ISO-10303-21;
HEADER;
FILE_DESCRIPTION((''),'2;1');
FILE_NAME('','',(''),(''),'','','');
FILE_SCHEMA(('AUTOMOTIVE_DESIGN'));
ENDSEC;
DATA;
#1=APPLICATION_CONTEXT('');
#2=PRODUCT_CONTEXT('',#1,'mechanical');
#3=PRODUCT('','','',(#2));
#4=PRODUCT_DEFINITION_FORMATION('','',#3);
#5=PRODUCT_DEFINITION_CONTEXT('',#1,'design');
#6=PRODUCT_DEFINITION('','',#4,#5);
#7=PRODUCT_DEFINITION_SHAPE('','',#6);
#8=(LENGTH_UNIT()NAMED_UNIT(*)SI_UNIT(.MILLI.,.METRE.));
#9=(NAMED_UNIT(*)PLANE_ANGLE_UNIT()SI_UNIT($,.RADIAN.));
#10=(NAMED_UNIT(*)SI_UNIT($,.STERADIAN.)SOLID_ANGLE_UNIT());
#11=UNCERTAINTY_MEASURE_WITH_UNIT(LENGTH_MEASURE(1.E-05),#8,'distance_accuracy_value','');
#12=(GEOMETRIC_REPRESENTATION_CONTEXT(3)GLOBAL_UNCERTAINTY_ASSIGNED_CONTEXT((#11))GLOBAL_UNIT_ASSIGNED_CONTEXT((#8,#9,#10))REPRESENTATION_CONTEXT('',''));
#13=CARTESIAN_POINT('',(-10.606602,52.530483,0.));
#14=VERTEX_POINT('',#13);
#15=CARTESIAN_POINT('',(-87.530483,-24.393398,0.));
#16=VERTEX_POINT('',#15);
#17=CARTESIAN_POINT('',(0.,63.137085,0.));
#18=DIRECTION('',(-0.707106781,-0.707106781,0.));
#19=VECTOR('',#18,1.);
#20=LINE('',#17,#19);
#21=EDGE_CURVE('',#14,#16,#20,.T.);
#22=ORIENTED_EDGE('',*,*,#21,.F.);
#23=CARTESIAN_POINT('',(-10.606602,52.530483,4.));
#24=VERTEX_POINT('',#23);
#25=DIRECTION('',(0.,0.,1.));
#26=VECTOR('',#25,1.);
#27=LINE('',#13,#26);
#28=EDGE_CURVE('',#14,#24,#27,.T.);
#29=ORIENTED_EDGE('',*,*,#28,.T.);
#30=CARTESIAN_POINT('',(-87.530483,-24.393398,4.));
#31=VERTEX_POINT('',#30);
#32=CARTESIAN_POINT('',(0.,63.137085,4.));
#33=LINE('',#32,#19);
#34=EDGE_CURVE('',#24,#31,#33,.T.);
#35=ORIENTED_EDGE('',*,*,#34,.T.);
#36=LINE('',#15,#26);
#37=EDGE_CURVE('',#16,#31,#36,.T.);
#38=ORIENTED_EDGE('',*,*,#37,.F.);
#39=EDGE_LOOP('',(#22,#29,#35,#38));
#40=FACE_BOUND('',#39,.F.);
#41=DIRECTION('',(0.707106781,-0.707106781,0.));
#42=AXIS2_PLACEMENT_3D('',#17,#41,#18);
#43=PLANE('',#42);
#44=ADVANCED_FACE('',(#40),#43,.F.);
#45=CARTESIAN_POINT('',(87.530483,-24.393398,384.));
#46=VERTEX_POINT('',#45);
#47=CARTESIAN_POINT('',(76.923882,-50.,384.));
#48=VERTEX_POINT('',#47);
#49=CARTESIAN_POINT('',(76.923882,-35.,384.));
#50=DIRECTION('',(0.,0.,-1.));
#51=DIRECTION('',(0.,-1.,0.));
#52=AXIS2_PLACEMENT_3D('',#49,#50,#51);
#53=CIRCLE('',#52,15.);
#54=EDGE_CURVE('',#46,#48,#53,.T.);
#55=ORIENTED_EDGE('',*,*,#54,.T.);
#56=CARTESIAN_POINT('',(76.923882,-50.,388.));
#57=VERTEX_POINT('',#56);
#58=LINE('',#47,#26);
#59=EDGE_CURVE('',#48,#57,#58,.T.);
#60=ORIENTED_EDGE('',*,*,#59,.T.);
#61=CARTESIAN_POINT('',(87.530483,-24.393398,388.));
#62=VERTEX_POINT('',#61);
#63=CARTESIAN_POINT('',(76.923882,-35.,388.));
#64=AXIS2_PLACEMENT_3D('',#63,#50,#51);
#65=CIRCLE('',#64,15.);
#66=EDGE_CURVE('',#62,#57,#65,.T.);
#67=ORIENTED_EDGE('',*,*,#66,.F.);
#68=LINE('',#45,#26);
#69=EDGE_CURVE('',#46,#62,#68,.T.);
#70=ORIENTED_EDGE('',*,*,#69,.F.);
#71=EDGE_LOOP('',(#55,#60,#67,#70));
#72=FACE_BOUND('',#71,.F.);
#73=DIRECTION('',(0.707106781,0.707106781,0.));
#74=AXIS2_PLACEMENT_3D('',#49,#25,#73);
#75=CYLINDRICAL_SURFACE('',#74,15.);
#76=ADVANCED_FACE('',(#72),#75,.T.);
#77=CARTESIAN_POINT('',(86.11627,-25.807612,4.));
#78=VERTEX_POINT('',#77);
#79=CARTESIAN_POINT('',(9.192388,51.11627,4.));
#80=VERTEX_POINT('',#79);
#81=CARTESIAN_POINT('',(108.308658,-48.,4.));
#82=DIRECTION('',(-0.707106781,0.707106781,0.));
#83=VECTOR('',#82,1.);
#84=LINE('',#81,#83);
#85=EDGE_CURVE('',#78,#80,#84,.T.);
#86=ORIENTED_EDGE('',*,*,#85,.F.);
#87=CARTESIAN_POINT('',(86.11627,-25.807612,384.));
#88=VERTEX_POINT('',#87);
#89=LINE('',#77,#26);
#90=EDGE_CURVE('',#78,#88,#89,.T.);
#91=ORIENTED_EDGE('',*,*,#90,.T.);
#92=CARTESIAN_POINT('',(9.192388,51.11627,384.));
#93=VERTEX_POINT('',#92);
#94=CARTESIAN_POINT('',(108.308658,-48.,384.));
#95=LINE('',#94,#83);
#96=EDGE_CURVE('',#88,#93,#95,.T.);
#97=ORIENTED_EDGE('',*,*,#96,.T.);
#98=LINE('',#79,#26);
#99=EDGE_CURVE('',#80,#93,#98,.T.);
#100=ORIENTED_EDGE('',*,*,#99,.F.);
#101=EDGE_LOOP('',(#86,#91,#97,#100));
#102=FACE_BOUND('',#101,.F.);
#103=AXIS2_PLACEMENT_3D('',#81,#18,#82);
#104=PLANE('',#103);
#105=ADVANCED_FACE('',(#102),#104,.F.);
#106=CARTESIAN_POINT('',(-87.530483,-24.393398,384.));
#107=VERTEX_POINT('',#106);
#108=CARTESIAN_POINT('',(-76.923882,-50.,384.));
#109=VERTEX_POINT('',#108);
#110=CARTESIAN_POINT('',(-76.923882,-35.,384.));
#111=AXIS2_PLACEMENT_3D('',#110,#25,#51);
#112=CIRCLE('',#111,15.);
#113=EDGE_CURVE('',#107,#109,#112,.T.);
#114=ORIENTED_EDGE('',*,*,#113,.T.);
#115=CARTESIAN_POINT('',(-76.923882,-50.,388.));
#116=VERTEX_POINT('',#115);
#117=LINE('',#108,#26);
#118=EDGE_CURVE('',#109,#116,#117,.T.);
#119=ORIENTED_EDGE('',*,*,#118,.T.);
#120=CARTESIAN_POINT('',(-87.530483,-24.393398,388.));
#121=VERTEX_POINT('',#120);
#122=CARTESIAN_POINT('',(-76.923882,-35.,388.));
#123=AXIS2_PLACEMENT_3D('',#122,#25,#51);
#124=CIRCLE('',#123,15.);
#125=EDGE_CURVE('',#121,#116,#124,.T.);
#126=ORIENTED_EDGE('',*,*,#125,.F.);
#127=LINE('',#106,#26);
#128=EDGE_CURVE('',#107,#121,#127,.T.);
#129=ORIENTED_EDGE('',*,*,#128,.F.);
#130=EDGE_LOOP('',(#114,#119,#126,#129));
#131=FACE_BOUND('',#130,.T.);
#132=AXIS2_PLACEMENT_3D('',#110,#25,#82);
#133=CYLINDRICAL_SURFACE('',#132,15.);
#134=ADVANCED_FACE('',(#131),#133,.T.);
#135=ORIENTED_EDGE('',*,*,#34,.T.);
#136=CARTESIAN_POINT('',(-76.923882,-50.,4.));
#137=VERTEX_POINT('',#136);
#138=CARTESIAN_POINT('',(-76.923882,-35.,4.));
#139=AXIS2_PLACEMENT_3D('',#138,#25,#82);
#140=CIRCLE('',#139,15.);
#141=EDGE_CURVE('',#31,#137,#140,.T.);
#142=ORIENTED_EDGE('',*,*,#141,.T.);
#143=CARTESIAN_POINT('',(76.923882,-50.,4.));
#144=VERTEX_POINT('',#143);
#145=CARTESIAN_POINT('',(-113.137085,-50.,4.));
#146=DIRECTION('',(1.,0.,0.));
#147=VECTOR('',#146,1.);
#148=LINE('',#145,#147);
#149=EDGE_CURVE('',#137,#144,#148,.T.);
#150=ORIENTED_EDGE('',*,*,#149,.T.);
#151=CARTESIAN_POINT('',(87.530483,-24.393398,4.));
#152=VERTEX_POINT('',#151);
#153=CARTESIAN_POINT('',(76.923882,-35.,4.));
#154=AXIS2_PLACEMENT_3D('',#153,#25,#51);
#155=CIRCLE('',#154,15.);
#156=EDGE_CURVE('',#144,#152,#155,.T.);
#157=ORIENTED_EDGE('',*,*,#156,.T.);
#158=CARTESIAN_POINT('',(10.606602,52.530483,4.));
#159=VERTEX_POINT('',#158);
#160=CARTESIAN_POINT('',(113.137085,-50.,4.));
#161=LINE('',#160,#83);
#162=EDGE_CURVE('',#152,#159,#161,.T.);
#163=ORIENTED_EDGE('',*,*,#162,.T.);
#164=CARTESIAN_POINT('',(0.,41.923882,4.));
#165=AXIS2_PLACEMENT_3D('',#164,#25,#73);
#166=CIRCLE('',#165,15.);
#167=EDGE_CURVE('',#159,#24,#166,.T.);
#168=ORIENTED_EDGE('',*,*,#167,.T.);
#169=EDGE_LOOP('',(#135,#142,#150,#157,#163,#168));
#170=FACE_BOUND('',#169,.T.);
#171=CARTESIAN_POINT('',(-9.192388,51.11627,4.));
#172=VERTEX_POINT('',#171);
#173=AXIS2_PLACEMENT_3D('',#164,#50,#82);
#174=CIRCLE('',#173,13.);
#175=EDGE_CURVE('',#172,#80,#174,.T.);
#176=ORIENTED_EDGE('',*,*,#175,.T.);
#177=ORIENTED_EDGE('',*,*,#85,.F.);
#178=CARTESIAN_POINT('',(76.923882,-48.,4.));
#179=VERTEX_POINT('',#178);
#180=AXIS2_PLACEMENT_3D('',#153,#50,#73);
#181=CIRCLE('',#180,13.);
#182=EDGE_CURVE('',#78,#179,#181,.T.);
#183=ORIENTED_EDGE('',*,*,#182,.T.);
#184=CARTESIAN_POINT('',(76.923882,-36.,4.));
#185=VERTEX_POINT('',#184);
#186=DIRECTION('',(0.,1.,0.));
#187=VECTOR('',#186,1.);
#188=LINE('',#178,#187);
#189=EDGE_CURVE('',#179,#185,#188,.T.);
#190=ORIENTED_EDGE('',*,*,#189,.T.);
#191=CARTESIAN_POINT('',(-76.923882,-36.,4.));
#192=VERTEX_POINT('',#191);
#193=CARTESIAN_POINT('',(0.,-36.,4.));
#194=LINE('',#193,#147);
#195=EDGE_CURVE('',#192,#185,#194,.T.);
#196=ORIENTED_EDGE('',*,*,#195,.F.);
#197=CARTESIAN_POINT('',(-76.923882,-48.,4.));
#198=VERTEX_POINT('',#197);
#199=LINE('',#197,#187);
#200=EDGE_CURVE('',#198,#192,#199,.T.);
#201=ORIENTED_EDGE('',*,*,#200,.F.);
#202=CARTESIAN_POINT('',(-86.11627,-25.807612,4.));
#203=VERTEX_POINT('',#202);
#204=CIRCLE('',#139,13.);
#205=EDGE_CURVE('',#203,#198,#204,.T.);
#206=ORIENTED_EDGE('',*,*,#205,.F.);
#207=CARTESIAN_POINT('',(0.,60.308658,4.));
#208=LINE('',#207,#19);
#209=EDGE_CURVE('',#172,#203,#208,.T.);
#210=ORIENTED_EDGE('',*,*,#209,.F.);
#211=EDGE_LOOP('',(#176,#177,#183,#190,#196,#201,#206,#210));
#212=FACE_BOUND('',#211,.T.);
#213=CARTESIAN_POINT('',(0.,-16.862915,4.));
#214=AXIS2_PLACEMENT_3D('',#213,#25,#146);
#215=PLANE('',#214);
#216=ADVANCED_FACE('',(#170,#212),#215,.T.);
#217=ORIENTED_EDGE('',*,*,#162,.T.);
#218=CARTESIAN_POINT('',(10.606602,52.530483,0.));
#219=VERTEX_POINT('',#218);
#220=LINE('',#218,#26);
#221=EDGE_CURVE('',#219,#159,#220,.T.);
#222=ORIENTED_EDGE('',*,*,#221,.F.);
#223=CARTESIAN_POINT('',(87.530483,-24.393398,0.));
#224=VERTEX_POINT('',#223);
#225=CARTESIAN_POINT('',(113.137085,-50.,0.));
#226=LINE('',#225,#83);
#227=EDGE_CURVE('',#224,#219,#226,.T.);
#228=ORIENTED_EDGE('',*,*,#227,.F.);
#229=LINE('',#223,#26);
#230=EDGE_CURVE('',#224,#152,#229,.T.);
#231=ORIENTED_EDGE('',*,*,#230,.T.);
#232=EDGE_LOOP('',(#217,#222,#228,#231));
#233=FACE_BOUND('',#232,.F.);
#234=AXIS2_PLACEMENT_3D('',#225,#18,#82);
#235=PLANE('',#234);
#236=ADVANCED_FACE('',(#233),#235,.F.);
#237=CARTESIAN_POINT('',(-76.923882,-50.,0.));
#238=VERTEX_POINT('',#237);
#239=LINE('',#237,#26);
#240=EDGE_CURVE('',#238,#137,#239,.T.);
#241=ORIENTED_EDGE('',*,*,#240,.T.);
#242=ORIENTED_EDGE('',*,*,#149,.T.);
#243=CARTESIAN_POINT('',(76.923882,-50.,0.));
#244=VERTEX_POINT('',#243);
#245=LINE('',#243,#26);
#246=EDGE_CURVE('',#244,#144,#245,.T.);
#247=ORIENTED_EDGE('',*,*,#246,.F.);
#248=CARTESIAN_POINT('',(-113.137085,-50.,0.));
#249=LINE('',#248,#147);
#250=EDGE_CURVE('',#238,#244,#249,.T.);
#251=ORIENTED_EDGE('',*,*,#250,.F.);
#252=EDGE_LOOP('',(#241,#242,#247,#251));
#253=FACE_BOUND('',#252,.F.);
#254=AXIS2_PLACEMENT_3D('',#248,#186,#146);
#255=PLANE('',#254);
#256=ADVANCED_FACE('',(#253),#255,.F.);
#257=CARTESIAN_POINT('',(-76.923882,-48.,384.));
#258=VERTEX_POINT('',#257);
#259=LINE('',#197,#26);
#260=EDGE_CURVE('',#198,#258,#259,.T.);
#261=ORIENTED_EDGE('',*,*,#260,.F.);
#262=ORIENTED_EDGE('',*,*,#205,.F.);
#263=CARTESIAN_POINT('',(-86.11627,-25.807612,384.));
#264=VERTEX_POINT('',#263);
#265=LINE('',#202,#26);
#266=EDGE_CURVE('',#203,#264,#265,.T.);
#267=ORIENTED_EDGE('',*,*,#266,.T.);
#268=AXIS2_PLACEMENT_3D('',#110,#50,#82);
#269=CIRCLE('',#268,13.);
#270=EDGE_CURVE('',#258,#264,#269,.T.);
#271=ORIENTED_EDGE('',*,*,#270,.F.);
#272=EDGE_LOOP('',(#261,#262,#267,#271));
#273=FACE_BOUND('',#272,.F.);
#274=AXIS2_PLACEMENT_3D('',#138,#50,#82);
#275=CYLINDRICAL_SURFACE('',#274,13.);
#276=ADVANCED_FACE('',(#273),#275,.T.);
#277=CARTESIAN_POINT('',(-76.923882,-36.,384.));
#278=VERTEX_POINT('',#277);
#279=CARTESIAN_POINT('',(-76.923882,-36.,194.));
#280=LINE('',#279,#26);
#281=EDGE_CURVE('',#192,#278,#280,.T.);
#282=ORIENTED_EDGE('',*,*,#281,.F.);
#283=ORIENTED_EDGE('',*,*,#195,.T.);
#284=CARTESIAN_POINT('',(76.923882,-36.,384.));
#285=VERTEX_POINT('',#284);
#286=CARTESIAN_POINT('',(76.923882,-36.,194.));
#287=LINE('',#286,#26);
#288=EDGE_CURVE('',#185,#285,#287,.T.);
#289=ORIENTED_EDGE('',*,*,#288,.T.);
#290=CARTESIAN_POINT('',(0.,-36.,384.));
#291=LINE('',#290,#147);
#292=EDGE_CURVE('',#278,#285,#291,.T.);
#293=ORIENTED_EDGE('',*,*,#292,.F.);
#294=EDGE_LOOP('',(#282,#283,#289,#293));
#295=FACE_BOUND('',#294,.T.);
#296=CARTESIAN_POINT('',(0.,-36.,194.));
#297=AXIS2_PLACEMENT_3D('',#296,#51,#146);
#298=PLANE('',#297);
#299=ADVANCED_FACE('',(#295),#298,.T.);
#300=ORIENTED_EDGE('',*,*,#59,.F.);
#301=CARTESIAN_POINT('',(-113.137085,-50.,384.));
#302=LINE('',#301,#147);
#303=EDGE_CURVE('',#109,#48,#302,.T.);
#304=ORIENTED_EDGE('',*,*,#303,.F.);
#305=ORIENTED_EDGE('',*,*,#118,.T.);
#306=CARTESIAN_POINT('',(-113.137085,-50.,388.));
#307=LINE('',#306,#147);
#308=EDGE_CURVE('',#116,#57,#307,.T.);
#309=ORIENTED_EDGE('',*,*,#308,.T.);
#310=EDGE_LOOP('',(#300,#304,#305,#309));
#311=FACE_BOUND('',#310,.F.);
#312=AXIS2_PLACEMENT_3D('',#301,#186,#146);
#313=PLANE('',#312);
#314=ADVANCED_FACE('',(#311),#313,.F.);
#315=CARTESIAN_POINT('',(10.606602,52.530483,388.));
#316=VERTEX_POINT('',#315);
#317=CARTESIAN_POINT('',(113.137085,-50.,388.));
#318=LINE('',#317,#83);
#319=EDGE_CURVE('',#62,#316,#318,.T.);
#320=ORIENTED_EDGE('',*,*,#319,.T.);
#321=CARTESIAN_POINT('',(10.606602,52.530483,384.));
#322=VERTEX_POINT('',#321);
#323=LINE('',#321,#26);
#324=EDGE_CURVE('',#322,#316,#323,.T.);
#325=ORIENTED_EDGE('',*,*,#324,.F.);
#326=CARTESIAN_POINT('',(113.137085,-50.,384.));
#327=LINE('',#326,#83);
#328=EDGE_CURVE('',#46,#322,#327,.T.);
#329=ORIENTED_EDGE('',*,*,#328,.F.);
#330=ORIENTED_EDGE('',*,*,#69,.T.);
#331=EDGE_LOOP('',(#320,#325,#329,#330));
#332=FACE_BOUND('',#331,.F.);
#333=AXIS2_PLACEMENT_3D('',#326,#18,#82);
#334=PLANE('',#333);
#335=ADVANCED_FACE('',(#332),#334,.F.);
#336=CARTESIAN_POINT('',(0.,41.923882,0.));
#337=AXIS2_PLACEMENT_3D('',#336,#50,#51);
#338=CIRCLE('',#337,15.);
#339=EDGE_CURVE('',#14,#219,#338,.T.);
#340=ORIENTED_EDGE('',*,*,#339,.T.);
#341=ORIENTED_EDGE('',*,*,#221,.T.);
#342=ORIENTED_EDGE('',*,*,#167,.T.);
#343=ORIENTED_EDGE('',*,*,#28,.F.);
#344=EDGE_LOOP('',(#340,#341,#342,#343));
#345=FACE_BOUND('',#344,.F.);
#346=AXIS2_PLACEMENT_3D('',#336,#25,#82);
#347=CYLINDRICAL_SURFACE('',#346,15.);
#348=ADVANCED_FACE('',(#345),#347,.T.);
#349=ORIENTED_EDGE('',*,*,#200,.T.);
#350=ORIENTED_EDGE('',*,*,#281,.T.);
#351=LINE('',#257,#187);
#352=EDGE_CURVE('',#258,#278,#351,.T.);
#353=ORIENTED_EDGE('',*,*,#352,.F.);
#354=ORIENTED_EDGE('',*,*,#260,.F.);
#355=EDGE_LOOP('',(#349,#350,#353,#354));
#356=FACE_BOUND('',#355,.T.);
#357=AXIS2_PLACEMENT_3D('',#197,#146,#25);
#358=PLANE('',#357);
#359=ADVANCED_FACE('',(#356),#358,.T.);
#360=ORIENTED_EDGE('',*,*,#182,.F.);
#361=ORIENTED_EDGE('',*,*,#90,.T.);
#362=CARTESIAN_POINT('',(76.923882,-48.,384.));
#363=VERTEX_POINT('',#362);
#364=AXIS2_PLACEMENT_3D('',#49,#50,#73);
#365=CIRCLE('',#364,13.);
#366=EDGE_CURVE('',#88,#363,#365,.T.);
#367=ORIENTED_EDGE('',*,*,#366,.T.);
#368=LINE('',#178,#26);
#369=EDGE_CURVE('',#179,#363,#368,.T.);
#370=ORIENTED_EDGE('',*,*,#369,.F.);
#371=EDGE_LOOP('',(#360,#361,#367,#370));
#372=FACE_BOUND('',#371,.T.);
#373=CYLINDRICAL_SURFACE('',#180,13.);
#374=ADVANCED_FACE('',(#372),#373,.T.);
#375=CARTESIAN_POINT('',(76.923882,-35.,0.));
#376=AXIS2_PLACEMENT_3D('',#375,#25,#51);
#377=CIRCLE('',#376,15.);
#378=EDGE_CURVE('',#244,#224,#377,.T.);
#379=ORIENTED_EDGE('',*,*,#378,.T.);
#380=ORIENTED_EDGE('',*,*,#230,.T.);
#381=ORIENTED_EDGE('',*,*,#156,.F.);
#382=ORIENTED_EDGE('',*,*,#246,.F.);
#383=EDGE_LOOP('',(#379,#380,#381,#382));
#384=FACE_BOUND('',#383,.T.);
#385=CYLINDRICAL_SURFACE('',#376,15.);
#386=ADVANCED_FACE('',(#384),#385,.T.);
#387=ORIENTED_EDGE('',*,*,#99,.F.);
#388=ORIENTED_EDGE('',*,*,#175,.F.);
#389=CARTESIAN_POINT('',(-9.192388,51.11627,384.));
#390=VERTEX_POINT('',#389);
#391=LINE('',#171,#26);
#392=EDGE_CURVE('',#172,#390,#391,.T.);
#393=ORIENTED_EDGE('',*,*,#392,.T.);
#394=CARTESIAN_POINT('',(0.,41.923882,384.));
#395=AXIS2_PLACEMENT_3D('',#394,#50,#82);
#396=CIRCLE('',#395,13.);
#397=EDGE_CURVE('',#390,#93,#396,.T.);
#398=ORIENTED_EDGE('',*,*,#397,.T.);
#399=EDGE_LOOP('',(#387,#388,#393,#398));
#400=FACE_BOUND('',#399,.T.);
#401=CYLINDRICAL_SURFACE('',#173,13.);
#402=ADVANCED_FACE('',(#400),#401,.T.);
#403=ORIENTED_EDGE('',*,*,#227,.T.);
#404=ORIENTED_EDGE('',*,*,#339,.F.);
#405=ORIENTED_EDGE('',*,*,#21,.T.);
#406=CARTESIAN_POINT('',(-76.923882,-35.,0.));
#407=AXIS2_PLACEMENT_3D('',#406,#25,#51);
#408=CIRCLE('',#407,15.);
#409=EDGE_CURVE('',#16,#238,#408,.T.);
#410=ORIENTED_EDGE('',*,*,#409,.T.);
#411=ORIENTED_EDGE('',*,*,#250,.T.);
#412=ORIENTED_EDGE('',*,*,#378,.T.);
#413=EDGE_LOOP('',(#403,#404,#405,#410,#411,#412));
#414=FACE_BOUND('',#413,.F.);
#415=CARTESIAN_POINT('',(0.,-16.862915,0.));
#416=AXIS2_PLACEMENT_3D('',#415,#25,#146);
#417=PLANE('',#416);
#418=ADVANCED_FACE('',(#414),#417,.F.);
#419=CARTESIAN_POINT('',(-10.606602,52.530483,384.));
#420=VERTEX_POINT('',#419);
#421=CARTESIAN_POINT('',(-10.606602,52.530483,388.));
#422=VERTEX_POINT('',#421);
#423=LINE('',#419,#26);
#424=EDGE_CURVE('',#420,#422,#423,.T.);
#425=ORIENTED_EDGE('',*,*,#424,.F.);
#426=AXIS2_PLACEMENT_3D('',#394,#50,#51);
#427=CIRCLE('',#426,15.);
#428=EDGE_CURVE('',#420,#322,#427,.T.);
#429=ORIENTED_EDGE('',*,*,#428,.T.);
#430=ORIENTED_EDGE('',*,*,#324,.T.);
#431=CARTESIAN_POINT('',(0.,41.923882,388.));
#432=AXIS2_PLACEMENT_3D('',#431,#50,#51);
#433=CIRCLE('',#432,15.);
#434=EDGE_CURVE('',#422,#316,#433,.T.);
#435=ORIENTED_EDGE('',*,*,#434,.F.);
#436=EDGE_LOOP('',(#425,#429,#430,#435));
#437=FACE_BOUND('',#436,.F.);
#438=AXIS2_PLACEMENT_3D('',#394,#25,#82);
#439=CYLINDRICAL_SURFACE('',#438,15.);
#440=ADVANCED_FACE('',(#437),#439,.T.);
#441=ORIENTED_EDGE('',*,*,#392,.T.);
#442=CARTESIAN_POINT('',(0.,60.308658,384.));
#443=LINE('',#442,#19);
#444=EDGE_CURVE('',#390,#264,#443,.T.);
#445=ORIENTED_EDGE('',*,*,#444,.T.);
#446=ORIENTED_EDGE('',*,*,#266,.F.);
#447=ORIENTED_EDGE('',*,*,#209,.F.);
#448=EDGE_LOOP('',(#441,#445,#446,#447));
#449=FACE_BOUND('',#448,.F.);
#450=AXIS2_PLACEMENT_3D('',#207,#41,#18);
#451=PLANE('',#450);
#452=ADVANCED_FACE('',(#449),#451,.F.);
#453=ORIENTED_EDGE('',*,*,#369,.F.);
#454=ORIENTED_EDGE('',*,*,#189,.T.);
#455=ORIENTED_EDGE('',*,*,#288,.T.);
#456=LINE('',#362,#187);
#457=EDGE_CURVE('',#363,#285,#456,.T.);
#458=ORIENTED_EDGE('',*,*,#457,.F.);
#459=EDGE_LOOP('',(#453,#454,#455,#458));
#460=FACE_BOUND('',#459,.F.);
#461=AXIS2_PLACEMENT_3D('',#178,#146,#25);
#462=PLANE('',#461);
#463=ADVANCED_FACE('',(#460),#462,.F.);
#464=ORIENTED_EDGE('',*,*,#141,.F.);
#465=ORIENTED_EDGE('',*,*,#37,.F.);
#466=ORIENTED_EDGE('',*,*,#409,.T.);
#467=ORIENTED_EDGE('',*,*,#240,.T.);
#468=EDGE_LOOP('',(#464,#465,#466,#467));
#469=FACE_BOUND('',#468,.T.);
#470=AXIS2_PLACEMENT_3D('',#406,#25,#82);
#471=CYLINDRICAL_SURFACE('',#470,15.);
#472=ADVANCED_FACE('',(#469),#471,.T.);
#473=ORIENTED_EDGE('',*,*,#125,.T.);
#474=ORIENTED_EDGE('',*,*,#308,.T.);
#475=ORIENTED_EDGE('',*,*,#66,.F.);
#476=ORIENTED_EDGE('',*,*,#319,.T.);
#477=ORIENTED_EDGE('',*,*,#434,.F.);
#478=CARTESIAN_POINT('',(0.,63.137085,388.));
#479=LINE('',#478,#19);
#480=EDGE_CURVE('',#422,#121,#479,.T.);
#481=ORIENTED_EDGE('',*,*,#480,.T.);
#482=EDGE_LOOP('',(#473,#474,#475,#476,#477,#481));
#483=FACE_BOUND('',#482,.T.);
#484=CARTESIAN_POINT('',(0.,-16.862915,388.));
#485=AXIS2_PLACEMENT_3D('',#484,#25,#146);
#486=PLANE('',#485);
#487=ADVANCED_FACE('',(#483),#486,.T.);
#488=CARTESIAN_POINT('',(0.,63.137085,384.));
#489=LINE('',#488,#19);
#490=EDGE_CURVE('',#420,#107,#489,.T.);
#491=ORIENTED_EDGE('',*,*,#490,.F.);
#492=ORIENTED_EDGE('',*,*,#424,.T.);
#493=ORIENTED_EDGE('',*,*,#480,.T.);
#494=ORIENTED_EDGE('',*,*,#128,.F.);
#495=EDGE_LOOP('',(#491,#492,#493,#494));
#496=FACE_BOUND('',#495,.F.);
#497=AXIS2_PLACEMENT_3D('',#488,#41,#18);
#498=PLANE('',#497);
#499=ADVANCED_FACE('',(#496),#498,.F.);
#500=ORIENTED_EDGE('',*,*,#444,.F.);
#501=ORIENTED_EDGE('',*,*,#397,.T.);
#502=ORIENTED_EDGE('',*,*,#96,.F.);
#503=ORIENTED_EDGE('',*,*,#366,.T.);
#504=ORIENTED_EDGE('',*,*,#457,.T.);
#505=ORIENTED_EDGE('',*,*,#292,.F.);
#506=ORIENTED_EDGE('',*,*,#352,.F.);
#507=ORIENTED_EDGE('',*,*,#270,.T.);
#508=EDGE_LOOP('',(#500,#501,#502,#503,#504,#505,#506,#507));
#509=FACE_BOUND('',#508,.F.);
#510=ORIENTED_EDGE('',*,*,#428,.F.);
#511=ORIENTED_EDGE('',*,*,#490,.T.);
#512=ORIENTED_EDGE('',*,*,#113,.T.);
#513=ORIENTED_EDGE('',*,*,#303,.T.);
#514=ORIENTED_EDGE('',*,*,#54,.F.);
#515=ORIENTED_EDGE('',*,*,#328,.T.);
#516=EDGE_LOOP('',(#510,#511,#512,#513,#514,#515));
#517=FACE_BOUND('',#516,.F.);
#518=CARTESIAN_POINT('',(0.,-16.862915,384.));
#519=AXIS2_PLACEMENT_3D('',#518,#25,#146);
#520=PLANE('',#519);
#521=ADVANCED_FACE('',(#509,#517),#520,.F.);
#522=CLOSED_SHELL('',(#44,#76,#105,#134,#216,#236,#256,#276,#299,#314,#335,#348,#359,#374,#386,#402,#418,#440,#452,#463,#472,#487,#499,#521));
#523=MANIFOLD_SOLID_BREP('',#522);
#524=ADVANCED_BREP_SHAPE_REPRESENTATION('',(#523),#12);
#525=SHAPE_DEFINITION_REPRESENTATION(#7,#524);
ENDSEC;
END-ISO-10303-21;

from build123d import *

# Parameters (mm, degrees)
F1_DEPTH    = 4
F2_R        = 15
F4_DEPTH    = 380
F5_T1_DEPTH = 458.4619407771
F5_T3_DEPTH = 412.5
F7_DEPTH    = 4
F8_R        = 15
F9_W        = 153.8477631085
F9_H        = 380
F10_DEPTH   = 12


# Not quite as in the source:
# - a fillet or chamfer that OpenCascade refuses, or shapes differently, is made with other operations: its cross-section is extruded or revolved along the edge and cut away or added


with BuildPart() as f1:
    # F0 (on Top) → F1 (new body)
    with BuildSketch(Plane.XY):
        Polygon((0, 63.1370849898), (-113.1370849898, -50), (113.1370849898, -50), align=None)
    extrude(amount=F1_DEPTH)

    # F2
    f2_edges = [f1.edges().sort_by_distance(p)[0] for p in [
        (-113.137085, -50, 2),
        (113.137085, -50, 2),
        (0, 63.137085, 2),
    ]]
    fillet(f2_edges, radius=F2_R)

    # F3 (on face) → F4 (join)
    with BuildSketch(Plane.XY.offset(4)):
        Polygon((108.3086578651, -48), (0, 60.3086578651), (-108.3086578651, -48), align=None)
    extrude(amount=F4_DEPTH)

    # F5: fillet of radius 13 on 3 edges, made by hand

    # F5_s2 → F5_t1 (cut)
    with BuildSketch(Plane.XY.offset(4)):
        with BuildLine():
            ThreePointArc((86.1162697097, -25.8076118446), (88.9343154769, -39.9748846207), (76.9238815543, -48))
            Line((76.9238815543, -48), (108.3086578651, -48))
            Line((108.3086578651, -48), (86.1162697097, -25.8076118446))
        make_face()
        with BuildLine():
            ThreePointArc((-86.1162697097, -25.8076118446), (-88.9343154769, -39.9748846207), (-76.9238815543, -48))
            Line((-76.9238815543, -48), (-108.3086578651, -48))
            Line((-108.3086578651, -48), (-86.1162697097, -25.8076118446))
        make_face()
    extrude(amount=F5_T1_DEPTH, mode=Mode.SUBTRACT)

    # F5_s4 → F5_t3 (cut)
    with BuildSketch(Plane.XY.offset(4)):
        with BuildLine():
            ThreePointArc((-9.1923881554, 51.1162697097), (0, 54.9238815543), (9.1923881554, 51.1162697097))
            Line((9.1923881554, 51.1162697097), (0, 60.3086578651))
            Line((0, 60.3086578651), (-9.1923881554, 51.1162697097))
        make_face()
    extrude(amount=F5_T3_DEPTH, mode=Mode.SUBTRACT)

    # F6 (on face) → F7 (join)
    with BuildSketch(Plane.XY.offset(384)):
        Polygon((0, 63.1370849898), (-113.1370849898, -50), (113.1370849898, -50), align=None)
    extrude(amount=F7_DEPTH)

    # F8
    f8_edges = [f1.edges().sort_by_distance(p)[0] for p in [
        (113.137085, -50, 386),
        (-113.137085, -50, 386),
        (0, 63.137085, 386),
    ]]
    fillet(f8_edges, radius=F8_R)

    # F9 (on face) → F10 (cut)
    with BuildSketch(Plane.XZ.offset(48)):
        with Locations((0, 194)):
            Rectangle(F9_W, F9_H)
    extrude(amount=-F10_DEPTH, mode=Mode.SUBTRACT)


solid = f1.part
